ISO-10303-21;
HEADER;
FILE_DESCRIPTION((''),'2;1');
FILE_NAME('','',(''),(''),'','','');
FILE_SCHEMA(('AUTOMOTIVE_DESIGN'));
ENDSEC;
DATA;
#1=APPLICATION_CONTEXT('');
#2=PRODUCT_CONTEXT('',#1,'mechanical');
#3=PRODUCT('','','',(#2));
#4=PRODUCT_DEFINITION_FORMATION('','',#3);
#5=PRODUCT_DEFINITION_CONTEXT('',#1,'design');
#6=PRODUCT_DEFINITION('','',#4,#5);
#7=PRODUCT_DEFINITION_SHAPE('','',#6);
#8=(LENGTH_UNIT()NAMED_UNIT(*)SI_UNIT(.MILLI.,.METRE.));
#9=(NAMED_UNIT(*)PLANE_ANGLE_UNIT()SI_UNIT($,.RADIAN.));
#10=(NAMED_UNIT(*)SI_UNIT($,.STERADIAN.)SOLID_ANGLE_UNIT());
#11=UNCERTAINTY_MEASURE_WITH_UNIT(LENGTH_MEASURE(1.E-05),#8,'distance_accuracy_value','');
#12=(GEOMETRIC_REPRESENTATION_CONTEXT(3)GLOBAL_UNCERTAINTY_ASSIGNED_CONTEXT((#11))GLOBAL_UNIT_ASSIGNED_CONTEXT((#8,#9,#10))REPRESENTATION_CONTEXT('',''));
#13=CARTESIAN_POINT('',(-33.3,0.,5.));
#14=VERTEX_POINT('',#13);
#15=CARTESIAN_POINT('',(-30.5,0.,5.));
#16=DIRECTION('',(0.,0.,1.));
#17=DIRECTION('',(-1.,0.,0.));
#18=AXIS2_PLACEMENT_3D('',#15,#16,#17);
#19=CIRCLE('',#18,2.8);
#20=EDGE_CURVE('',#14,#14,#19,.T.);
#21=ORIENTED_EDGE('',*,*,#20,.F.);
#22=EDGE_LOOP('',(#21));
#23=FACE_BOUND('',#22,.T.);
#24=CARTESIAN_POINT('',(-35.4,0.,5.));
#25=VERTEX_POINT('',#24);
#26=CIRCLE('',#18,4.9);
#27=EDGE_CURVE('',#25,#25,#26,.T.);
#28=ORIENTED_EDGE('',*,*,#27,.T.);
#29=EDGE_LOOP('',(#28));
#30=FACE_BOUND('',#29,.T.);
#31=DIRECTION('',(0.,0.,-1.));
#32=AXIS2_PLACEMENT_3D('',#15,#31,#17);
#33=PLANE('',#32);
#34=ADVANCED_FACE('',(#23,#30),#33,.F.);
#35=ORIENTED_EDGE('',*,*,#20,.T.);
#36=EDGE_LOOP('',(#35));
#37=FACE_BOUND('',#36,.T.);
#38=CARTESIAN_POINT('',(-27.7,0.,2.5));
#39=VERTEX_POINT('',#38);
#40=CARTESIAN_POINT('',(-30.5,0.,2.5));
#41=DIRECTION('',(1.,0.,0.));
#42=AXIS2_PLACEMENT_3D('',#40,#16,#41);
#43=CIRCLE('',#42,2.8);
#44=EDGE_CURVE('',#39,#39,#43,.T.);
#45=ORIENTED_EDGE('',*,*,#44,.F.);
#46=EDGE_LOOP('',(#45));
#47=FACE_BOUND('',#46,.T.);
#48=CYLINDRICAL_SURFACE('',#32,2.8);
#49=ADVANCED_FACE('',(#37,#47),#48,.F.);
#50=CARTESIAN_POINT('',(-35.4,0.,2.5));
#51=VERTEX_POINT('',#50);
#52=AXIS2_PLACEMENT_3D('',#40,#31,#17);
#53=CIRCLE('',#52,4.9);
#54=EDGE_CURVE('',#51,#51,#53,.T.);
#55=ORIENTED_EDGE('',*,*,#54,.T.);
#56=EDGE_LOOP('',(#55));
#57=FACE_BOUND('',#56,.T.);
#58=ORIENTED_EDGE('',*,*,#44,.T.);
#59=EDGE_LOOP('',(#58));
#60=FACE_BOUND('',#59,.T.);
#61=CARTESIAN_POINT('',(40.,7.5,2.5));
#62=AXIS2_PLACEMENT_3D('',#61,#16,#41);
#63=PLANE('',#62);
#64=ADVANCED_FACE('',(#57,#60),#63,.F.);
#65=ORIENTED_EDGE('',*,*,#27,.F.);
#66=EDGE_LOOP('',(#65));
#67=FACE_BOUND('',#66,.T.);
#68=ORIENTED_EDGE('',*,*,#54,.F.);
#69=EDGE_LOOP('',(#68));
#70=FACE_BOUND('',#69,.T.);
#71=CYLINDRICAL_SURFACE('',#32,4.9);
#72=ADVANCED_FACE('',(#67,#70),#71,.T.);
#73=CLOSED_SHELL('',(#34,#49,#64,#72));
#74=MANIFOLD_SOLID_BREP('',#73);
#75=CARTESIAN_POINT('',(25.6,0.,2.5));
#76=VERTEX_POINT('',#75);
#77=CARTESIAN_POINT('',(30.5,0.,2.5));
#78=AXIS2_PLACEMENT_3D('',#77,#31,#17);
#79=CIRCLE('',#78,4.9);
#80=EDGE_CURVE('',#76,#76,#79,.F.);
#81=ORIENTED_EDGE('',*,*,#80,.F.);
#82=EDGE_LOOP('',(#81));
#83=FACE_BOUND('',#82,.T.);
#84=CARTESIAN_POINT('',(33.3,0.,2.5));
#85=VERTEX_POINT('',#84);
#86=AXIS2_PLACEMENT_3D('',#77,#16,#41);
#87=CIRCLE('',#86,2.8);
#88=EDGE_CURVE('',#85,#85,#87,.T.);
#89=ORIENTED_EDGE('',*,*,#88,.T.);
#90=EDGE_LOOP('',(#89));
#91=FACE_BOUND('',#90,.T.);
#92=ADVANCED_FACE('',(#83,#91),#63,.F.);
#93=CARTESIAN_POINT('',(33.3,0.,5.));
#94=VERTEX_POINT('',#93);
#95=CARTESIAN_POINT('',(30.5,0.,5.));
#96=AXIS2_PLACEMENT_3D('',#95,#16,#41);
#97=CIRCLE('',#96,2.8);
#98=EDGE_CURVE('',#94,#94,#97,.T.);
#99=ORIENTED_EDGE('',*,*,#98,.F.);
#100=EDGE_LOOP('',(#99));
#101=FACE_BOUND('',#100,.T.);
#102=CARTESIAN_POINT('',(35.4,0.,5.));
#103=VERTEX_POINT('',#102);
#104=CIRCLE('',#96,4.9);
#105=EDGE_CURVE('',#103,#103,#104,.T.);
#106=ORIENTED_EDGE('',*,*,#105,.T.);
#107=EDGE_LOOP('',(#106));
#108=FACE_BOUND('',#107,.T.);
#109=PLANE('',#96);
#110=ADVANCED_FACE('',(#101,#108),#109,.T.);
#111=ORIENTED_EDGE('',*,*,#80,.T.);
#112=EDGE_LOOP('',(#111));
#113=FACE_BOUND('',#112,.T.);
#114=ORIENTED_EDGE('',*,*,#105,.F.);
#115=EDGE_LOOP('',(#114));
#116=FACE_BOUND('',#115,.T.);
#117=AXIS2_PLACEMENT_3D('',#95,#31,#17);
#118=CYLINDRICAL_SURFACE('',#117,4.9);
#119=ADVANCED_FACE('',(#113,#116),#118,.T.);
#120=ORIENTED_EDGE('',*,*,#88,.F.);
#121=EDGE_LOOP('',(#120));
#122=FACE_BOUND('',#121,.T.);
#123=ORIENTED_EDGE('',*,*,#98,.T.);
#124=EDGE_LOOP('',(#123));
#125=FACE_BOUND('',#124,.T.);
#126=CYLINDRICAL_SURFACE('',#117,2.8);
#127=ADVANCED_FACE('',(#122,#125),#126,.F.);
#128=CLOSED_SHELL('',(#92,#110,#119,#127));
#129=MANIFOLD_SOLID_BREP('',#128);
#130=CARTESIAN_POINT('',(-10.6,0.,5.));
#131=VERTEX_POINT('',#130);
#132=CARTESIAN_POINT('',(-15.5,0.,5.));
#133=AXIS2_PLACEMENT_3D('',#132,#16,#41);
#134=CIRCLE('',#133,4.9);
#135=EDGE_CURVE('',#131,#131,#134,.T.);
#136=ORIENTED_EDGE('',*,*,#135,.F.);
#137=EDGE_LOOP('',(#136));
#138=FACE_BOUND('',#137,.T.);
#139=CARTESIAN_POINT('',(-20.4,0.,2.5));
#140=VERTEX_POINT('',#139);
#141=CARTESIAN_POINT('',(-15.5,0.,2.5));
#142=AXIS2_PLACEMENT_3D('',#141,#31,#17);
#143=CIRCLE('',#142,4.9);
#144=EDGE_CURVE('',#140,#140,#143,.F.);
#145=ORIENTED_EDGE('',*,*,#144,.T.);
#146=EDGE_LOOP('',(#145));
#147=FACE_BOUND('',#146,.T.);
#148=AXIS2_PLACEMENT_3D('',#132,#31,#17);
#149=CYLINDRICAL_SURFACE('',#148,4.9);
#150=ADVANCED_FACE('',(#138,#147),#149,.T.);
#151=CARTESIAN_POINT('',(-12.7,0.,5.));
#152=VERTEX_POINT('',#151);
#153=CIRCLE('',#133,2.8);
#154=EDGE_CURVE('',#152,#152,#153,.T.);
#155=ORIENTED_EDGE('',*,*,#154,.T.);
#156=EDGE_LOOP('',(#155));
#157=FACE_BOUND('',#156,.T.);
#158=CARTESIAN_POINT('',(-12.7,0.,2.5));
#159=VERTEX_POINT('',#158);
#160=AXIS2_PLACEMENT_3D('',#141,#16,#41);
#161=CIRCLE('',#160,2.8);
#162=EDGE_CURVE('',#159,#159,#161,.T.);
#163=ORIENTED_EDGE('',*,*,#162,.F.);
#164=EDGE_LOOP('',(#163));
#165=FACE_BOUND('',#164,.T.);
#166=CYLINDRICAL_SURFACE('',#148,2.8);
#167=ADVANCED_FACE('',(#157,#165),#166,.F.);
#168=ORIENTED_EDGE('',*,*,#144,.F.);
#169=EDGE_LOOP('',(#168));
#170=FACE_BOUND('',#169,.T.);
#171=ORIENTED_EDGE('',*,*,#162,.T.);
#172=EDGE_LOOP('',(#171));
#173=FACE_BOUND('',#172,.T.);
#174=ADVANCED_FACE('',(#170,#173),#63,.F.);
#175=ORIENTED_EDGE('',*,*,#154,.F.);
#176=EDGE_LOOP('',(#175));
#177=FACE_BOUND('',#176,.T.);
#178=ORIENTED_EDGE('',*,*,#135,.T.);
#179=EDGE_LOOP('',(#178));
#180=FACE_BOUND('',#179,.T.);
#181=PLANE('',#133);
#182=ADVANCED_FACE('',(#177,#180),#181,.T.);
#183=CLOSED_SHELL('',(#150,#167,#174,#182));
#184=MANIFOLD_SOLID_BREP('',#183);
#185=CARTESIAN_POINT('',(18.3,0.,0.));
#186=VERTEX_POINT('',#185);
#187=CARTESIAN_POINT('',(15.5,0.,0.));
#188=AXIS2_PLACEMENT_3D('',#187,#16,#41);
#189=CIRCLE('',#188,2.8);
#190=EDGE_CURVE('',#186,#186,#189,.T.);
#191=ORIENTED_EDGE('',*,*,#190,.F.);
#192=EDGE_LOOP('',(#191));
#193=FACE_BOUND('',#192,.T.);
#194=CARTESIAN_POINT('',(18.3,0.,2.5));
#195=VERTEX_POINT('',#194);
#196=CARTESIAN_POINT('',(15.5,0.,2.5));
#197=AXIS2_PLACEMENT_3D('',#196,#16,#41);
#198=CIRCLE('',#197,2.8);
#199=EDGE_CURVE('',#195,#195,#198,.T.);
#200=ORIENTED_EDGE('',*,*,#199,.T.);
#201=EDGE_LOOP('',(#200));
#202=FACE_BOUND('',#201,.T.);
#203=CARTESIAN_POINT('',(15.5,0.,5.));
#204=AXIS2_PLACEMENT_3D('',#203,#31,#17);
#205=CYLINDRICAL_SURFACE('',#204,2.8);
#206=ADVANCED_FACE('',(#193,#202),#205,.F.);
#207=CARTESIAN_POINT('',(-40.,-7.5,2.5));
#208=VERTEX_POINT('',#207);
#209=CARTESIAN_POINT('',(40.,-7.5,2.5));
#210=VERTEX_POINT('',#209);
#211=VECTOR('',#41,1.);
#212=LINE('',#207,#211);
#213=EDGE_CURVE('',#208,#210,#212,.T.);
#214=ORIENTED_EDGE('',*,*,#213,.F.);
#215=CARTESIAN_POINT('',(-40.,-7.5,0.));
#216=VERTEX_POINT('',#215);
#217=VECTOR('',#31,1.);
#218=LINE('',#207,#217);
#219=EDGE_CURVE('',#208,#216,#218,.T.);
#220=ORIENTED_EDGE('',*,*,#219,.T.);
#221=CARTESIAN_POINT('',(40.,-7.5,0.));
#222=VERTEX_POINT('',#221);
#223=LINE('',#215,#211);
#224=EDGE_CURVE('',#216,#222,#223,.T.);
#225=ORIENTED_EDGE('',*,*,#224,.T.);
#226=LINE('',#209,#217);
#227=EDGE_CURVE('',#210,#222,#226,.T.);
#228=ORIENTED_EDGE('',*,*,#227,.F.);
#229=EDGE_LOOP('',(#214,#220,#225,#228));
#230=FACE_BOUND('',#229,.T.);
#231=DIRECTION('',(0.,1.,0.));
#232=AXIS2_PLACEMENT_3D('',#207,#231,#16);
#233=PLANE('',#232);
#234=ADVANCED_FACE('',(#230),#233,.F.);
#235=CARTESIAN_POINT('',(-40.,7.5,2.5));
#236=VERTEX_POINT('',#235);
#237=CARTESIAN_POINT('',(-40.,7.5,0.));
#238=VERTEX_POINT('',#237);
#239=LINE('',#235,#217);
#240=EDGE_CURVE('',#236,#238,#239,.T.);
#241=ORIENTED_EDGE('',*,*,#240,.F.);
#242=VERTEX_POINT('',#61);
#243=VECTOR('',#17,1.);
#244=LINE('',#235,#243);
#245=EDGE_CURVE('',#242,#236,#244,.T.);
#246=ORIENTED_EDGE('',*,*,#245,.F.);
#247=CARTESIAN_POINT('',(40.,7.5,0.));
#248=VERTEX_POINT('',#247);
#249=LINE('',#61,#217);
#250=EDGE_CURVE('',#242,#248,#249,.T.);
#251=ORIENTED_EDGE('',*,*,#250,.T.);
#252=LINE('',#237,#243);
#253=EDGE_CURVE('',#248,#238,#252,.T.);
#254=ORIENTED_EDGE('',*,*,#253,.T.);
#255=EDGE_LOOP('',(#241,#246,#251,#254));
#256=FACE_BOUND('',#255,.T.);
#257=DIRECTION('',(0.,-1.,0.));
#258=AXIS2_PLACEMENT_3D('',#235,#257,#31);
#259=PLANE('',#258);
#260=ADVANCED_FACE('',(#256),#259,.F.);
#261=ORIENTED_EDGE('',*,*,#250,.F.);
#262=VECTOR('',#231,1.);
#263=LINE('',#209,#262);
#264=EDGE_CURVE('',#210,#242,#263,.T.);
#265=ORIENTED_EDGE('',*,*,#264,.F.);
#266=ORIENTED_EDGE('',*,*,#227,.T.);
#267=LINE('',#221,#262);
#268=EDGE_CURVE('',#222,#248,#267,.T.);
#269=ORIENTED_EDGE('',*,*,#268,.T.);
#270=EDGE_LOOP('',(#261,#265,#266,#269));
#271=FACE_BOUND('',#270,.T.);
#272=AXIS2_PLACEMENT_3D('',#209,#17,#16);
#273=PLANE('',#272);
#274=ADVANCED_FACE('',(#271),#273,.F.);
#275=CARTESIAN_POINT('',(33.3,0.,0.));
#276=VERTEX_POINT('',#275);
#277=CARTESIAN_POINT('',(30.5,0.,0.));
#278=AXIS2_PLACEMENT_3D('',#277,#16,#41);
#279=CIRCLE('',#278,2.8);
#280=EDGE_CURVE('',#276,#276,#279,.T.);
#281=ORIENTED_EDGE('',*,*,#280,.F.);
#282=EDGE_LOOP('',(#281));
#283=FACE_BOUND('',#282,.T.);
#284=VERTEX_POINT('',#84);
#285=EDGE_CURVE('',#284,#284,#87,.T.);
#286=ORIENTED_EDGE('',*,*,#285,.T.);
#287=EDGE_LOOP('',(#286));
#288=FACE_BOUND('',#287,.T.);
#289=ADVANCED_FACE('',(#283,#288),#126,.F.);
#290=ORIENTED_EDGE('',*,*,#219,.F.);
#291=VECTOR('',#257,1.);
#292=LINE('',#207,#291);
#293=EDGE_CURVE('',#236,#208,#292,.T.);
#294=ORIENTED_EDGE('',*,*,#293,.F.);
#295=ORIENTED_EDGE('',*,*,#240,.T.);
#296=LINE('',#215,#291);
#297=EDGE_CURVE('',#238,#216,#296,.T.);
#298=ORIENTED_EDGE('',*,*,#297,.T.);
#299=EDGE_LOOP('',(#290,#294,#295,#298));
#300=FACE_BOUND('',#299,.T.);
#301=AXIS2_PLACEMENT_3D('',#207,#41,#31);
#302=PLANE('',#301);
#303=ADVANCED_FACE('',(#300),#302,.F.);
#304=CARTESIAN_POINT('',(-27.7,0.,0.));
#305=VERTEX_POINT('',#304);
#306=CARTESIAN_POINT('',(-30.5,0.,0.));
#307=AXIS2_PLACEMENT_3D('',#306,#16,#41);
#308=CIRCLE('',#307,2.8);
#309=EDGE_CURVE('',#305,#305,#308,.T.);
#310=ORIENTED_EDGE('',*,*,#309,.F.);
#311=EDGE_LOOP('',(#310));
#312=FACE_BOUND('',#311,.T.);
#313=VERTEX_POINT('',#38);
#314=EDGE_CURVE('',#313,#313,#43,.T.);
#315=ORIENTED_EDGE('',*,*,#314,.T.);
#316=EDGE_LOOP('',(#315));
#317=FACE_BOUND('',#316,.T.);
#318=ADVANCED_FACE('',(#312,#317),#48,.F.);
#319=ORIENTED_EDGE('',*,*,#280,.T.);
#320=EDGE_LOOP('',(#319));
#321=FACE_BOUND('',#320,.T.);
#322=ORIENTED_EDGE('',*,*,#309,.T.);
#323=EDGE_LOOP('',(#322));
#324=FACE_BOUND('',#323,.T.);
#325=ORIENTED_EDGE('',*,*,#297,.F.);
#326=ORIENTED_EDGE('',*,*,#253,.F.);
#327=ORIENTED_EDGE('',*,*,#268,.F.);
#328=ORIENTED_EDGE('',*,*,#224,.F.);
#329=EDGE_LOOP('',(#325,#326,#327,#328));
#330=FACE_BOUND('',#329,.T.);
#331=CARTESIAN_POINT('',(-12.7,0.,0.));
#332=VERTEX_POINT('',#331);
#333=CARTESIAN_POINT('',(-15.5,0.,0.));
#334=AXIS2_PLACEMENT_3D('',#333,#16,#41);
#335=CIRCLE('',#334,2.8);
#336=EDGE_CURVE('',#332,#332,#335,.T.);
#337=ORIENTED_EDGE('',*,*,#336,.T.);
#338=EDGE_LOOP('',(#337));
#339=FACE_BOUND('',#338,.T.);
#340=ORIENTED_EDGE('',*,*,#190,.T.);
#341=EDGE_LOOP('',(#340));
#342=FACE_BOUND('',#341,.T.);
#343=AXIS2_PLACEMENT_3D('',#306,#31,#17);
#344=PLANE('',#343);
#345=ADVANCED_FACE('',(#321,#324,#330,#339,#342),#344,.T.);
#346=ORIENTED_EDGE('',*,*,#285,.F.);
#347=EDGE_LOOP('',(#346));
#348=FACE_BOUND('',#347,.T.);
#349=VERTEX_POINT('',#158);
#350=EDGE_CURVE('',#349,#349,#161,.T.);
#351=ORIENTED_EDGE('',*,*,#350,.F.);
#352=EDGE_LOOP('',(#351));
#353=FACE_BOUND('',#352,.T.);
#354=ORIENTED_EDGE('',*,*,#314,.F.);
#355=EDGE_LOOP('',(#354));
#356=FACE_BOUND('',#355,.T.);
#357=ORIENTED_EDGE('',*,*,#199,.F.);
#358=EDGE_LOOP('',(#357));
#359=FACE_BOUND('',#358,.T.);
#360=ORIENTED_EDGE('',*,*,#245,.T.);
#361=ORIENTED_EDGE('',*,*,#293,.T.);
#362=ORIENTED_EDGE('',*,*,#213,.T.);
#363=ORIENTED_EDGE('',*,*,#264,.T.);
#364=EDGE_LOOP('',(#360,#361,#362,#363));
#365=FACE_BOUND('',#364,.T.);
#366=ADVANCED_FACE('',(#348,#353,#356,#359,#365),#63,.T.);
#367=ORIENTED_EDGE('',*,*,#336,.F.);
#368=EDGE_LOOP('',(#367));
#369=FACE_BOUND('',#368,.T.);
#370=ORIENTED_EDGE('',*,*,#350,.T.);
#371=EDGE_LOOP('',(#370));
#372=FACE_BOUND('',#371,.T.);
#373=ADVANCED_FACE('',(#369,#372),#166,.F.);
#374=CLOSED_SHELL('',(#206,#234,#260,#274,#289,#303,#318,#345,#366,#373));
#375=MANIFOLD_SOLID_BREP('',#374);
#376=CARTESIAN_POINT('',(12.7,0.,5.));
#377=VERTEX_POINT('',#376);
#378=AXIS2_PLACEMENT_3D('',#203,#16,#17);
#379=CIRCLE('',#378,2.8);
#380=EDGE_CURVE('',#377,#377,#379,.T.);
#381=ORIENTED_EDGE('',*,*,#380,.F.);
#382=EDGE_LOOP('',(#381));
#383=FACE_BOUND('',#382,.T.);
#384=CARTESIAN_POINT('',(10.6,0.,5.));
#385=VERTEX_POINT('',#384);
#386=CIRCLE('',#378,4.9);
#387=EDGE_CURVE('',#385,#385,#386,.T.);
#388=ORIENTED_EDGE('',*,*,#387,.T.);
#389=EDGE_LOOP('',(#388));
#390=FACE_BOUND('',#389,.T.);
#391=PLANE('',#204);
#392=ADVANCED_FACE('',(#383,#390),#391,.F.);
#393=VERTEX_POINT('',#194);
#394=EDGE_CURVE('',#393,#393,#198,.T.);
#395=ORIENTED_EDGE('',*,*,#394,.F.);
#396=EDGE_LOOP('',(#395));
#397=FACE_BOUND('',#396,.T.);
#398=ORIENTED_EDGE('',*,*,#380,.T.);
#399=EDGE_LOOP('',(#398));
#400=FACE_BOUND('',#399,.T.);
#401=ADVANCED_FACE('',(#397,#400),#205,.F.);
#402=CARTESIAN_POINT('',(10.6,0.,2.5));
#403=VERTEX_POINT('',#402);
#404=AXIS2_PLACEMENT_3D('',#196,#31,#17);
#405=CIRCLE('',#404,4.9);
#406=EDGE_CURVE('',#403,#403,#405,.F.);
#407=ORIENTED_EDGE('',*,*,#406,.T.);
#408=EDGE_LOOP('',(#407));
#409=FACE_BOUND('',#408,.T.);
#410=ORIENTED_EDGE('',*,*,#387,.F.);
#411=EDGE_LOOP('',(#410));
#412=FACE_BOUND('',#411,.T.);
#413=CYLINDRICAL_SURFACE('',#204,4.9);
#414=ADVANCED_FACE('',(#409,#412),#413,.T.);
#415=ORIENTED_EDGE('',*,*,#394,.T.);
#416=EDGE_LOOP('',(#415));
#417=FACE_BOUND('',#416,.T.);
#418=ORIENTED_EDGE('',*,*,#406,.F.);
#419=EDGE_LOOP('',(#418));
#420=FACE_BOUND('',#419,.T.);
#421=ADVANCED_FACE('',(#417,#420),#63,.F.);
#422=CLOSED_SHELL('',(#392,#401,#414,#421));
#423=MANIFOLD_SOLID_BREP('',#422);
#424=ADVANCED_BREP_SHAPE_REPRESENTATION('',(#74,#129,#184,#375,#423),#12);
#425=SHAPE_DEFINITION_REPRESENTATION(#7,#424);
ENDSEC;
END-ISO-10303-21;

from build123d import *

# Parameters (mm, degrees)
SKETCH1_R             = 4.9
SKETCH1_R_2           = 2.8
BOSS_EXTRUDE1_DEPTH   = 5
BOSS_EXTRUDE1_2_DEPTH = 5
BOSS_EXTRUDE1_3_DEPTH = 5
BOSS_EXTRUDE1_4_DEPTH = 5
SKETCH3_W             = 80
SKETCH3_H             = 15
BOSS_EXTRUDE2_DEPTH   = 2.5
SKETCH4_R             = 2.8
CUT_EXTRUDE1_DEPTH    = 42.003048667


with BuildPart() as part:
    # Sketch1 → Boss-Extrude1 (new body)
    with BuildSketch(Plane.XY):
        with Locations((-15.5, 0)):
            Circle(SKETCH1_R)
        with Locations((-15.5, 0)):
            Circle(SKETCH1_R_2, mode=Mode.SUBTRACT)
    extrude(amount=BOSS_EXTRUDE1_DEPTH)



with BuildPart() as body_2:
    # Sketch1 → Boss-Extrude1 2 (new body)
    with BuildSketch(Plane.XY):
        with Locations((-30.5, 0)):
            Circle(SKETCH1_R)
        with Locations((-30.5, 0)):
            Circle(SKETCH1_R_2, mode=Mode.SUBTRACT)
    extrude(amount=BOSS_EXTRUDE1_2_DEPTH)


with BuildPart() as body_3:
    # Sketch1 → Boss-Extrude1 3 (new body)
    with BuildSketch(Plane.XY):
        with Locations((15.5, 0)):
            Circle(SKETCH1_R)
        with Locations((15.5, 0)):
            Circle(SKETCH1_R_2, mode=Mode.SUBTRACT)
    extrude(amount=BOSS_EXTRUDE1_3_DEPTH)


with BuildPart() as body_4:
    # Sketch1 → Boss-Extrude1 4 (new body)
    with BuildSketch(Plane.XY):
        with Locations((30.5, 0)):
            Circle(SKETCH1_R)
        with Locations((30.5, 0)):
            Circle(SKETCH1_R_2, mode=Mode.SUBTRACT)
    extrude(amount=BOSS_EXTRUDE1_4_DEPTH)


with BuildPart() as part_1:
    add(part.part)

    add(body_2.part)  # Boss-Extrude2 merges body 2

    add(body_3.part)  # Boss-Extrude2 merges body 3

    add(body_4.part)  # Boss-Extrude2 merges body 4
    # Sketch3 → Boss-Extrude2 (add)
    with BuildSketch(Plane.XY):
        Rectangle(SKETCH3_W, SKETCH3_H)
    extrude(amount=BOSS_EXTRUDE2_DEPTH)

    # Sketch4 → Cut-Extrude1 (cut, through all)
    with BuildSketch(Plane.XY.offset(5)):
        with Locations((-30.5, 0)):
            Circle(SKETCH4_R)
        with Locations((-15.5, 0)):
            Circle(SKETCH4_R)
        with Locations((15.5, 0)):
            Circle(SKETCH4_R)
        with Locations((30.5, 0)):
            Circle(SKETCH4_R)
    extrude(amount=-CUT_EXTRUDE1_DEPTH, mode=Mode.SUBTRACT)


with BuildPart() as body_2_2:
    # Split1: the piece on the far side of the plane
    add(part_1.part)
    split(bisect_by=Plane(origin=(0, 0, 2.5), x_dir=(-1, 0, 0), z_dir=(0, 0, -1)), keep=Keep.BOTTOM)


with BuildPart() as part_2:
    add(part_1.part)

    # Split1
    split(bisect_by=Plane(origin=(0, 0, 2.5), x_dir=(-1, 0, 0), z_dir=(0, 0, -1)), keep=Keep.TOP)


solid = Compound([body_2_2.part, part_2.part])
